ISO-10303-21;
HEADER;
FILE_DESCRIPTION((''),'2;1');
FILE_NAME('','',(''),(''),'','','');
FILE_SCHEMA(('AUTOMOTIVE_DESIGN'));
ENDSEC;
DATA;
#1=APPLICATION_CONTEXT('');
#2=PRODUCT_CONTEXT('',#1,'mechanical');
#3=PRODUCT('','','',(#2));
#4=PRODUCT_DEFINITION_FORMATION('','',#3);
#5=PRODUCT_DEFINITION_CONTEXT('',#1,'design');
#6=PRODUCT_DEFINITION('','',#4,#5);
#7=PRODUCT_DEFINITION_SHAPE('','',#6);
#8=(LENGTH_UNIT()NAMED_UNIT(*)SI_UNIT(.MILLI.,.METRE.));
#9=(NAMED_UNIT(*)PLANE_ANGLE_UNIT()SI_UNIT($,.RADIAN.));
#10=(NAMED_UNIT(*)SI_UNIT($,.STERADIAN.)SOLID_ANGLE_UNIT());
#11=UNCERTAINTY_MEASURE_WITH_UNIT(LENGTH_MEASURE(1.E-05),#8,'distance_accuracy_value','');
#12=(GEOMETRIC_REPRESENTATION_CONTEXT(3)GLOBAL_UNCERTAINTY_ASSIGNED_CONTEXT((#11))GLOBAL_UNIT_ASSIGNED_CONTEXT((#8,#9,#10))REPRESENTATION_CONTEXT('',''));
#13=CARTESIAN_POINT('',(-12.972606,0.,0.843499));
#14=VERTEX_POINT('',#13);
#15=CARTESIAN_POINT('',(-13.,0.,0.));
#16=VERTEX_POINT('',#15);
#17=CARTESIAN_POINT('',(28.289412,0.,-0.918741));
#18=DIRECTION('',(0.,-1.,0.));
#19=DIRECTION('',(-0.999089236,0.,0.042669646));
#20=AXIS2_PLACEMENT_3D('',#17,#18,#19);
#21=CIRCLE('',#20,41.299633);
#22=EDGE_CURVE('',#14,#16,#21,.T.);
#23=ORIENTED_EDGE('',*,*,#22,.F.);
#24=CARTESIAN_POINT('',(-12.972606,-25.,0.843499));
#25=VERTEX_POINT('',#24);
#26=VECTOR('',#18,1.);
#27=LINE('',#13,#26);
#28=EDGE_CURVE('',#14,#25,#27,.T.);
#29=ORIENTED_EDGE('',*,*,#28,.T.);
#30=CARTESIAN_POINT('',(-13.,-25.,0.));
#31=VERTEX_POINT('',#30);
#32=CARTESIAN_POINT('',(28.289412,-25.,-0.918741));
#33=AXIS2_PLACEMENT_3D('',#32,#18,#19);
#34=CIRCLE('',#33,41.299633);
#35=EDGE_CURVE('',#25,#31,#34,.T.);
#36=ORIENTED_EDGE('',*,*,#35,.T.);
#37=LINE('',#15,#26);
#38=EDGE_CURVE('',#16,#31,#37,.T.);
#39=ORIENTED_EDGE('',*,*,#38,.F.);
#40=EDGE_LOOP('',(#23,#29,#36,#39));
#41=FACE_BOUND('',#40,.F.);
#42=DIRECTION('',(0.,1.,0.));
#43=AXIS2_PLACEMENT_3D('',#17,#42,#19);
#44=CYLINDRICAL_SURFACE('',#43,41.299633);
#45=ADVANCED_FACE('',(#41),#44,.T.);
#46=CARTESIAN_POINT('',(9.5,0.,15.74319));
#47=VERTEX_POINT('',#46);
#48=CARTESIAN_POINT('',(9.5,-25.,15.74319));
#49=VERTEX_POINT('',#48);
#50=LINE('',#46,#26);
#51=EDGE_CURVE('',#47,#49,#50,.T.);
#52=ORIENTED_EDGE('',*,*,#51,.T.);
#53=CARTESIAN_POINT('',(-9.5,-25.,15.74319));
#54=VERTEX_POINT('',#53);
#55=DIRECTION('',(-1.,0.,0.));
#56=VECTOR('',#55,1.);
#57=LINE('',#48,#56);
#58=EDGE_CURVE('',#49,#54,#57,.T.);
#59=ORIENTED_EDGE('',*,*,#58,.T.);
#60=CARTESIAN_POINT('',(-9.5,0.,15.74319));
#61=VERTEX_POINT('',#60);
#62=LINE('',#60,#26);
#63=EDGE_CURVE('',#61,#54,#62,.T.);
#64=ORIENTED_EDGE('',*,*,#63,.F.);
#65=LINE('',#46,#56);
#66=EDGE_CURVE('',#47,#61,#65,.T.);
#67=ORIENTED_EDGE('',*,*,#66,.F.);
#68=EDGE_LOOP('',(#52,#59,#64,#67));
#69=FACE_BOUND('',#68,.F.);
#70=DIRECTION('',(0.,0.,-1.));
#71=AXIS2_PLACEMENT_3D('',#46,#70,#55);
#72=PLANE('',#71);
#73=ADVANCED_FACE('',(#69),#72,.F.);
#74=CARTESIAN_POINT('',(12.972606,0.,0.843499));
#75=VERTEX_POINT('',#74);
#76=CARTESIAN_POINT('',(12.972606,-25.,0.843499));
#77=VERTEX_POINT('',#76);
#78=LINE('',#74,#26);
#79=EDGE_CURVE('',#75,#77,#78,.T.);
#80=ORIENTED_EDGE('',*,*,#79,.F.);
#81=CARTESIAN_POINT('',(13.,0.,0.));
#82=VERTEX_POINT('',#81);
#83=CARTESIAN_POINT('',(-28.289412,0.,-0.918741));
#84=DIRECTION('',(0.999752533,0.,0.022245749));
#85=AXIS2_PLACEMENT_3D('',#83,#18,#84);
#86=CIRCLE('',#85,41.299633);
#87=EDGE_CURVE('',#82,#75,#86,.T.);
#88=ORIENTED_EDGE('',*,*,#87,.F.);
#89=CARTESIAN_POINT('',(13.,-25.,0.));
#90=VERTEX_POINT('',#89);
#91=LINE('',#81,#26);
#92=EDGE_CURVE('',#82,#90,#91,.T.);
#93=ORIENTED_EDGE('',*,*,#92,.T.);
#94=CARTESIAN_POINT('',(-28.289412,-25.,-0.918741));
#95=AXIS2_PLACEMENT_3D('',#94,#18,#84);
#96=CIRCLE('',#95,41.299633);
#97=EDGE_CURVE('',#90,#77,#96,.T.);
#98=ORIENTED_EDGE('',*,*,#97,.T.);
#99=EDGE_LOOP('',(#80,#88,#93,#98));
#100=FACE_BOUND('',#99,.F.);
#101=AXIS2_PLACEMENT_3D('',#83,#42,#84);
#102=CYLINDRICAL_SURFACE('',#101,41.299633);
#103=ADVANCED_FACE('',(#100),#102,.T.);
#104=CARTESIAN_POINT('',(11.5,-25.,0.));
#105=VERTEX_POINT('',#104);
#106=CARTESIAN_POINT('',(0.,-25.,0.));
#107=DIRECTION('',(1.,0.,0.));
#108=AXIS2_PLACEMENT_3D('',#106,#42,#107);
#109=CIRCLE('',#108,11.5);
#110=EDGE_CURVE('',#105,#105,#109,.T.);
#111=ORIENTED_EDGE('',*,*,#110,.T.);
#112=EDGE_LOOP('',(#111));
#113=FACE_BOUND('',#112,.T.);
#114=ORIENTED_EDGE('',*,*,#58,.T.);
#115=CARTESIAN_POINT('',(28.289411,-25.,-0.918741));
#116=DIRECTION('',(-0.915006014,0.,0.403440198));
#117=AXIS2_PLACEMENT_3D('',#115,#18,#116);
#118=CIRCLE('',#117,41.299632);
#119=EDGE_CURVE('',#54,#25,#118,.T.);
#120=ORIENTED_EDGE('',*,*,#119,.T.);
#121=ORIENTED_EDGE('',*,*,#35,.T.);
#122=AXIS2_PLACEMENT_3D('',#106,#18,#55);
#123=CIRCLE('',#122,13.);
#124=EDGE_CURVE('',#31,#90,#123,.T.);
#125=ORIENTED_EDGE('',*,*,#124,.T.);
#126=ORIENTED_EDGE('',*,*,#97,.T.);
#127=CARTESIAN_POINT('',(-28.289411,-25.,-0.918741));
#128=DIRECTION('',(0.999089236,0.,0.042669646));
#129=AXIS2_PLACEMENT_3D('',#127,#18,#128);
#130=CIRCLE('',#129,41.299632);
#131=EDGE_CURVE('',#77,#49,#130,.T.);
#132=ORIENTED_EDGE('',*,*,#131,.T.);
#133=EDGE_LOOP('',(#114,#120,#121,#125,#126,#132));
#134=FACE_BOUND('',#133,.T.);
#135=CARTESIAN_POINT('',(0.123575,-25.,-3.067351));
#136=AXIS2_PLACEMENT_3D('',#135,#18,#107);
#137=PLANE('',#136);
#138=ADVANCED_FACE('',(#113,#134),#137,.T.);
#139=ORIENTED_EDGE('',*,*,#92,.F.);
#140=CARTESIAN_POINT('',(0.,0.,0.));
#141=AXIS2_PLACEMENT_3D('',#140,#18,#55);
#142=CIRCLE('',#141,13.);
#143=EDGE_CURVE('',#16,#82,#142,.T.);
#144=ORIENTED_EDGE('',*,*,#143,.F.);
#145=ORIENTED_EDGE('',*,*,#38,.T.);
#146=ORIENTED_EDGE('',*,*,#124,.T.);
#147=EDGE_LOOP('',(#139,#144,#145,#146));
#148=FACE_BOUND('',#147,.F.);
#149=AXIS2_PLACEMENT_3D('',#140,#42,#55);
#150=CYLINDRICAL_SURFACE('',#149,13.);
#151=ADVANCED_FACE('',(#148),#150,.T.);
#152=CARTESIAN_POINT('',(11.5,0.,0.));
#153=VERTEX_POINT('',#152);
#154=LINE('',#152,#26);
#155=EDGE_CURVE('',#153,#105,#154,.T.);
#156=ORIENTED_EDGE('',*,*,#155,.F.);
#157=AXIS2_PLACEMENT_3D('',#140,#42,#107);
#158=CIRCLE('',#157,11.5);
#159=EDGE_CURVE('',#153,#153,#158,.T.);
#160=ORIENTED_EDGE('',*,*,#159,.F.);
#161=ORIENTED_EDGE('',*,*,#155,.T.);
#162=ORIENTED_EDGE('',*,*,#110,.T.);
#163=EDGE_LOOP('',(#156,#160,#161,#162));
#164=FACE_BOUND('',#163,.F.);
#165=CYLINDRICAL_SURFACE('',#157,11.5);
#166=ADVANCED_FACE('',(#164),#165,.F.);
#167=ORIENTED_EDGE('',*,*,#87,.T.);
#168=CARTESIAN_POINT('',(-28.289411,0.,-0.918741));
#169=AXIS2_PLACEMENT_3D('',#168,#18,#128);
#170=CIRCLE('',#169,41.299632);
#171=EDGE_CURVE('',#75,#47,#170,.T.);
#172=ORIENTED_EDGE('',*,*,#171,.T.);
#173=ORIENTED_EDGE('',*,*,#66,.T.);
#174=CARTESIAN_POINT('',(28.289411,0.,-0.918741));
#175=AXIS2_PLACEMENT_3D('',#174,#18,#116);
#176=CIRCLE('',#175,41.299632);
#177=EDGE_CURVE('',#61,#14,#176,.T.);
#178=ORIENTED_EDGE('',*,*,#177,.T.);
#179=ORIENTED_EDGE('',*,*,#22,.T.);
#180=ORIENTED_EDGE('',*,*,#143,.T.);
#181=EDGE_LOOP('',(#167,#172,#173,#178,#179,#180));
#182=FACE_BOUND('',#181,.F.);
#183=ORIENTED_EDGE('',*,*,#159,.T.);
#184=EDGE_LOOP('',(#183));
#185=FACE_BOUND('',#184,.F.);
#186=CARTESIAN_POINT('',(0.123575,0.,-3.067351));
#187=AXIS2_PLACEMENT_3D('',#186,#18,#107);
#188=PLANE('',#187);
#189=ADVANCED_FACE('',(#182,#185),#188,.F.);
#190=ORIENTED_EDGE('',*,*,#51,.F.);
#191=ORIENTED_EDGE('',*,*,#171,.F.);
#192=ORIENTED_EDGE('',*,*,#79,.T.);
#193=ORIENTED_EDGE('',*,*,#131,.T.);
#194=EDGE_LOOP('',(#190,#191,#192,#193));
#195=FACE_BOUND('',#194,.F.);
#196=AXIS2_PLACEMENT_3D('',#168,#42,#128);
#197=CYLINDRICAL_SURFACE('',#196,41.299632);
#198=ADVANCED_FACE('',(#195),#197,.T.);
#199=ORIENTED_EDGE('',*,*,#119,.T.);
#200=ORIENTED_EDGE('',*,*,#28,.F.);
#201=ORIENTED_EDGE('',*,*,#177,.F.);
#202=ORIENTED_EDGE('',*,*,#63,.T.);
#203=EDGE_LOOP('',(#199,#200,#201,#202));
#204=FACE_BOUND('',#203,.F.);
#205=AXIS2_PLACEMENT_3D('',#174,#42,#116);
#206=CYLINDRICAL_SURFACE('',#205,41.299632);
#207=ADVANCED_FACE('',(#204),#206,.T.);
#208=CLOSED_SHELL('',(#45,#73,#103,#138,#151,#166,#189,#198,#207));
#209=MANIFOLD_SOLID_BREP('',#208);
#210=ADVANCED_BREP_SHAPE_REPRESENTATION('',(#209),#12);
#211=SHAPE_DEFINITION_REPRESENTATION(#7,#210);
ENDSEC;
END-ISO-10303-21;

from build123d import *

# Parameters (mm, degrees)
F1_DEPTH = 25


with BuildPart() as f1:
    # F0 (on Front) → F1 (new body)
    with BuildSketch(Plane.XZ):
        with BuildLine():
            ThreePointArc((9.5, 6.4807406984), (10.9886304879, 3.3911649916), (11.5, 0))
            ThreePointArc((11.5, 0), (-3.3911649916, -10.9886304879), (-9.5, 6.4807406984))
            Line((-9.5, 6.4807406984), (-9.5, 8.8741196746))
            ThreePointArc((-9.5, 8.8741196746), (-11.932192643, 5.1597266138), (-12.9726060851, 0.8434994728))
            ThreePointArc((-12.9726060851, 0.8434994728), (-12.9884576775, 0.4218197114), (-13, 0))
            ThreePointArc((-13, 0), (0, -13), (13, 0))
            ThreePointArc((13, 0), (12.9884576775, 0.4218197114), (12.9726060851, 0.8434994728))
            ThreePointArc((12.9726060851, 0.8434994728), (11.932192643, 5.1597266138), (9.5, 8.8741196746))
            Line((9.5, 8.8741196746), (9.5, 6.4807406984))
        make_face()
        with BuildLine():
            ThreePointArc((-9.5, 6.4807406984), (0, 11.5), (9.5, 6.4807406984))
            Line((9.5, 6.4807406984), (9.5, 8.8741196746))
            ThreePointArc((9.5, 8.8741196746), (0, 13), (-9.5, 8.8741196746))
            Line((-9.5, 8.8741196746), (-9.5, 6.4807406984))
        make_face()
        with BuildLine():
            Line((9.5, 15.7431904227), (9.5, 8.8741196746))
            ThreePointArc((9.5, 8.8741196746), (11.932192643, 5.1597266138), (12.9726060851, 0.8434994728))
            ThreePointArc((12.9726060851, 0.8434994728), (11.932253156, 8.45554701), (9.5, 15.7431904227))
        make_face()
        with BuildLine():
            ThreePointArc((-9.5, 8.8741196746), (0, 13), (9.5, 8.8741196746))
            Line((9.5, 8.8741196746), (9.5, 15.7431904227))
            Line((9.5, 15.7431904227), (-9.5, 15.7431904227))
            Line((-9.5, 15.7431904227), (-9.5, 8.8741196746))
        make_face()
        with BuildLine():
            ThreePointArc((-12.9726060851, 0.8434994728), (-11.932192643, 5.1597266138), (-9.5, 8.8741196746))
            Line((-9.5, 8.8741196746), (-9.5, 15.7431904227))
            ThreePointArc((-9.5, 15.7431904227), (-11.932253156, 8.45554701), (-12.9726060851, 0.8434994728))
        make_face()
    extrude(amount=F1_DEPTH)


solid = f1.part
